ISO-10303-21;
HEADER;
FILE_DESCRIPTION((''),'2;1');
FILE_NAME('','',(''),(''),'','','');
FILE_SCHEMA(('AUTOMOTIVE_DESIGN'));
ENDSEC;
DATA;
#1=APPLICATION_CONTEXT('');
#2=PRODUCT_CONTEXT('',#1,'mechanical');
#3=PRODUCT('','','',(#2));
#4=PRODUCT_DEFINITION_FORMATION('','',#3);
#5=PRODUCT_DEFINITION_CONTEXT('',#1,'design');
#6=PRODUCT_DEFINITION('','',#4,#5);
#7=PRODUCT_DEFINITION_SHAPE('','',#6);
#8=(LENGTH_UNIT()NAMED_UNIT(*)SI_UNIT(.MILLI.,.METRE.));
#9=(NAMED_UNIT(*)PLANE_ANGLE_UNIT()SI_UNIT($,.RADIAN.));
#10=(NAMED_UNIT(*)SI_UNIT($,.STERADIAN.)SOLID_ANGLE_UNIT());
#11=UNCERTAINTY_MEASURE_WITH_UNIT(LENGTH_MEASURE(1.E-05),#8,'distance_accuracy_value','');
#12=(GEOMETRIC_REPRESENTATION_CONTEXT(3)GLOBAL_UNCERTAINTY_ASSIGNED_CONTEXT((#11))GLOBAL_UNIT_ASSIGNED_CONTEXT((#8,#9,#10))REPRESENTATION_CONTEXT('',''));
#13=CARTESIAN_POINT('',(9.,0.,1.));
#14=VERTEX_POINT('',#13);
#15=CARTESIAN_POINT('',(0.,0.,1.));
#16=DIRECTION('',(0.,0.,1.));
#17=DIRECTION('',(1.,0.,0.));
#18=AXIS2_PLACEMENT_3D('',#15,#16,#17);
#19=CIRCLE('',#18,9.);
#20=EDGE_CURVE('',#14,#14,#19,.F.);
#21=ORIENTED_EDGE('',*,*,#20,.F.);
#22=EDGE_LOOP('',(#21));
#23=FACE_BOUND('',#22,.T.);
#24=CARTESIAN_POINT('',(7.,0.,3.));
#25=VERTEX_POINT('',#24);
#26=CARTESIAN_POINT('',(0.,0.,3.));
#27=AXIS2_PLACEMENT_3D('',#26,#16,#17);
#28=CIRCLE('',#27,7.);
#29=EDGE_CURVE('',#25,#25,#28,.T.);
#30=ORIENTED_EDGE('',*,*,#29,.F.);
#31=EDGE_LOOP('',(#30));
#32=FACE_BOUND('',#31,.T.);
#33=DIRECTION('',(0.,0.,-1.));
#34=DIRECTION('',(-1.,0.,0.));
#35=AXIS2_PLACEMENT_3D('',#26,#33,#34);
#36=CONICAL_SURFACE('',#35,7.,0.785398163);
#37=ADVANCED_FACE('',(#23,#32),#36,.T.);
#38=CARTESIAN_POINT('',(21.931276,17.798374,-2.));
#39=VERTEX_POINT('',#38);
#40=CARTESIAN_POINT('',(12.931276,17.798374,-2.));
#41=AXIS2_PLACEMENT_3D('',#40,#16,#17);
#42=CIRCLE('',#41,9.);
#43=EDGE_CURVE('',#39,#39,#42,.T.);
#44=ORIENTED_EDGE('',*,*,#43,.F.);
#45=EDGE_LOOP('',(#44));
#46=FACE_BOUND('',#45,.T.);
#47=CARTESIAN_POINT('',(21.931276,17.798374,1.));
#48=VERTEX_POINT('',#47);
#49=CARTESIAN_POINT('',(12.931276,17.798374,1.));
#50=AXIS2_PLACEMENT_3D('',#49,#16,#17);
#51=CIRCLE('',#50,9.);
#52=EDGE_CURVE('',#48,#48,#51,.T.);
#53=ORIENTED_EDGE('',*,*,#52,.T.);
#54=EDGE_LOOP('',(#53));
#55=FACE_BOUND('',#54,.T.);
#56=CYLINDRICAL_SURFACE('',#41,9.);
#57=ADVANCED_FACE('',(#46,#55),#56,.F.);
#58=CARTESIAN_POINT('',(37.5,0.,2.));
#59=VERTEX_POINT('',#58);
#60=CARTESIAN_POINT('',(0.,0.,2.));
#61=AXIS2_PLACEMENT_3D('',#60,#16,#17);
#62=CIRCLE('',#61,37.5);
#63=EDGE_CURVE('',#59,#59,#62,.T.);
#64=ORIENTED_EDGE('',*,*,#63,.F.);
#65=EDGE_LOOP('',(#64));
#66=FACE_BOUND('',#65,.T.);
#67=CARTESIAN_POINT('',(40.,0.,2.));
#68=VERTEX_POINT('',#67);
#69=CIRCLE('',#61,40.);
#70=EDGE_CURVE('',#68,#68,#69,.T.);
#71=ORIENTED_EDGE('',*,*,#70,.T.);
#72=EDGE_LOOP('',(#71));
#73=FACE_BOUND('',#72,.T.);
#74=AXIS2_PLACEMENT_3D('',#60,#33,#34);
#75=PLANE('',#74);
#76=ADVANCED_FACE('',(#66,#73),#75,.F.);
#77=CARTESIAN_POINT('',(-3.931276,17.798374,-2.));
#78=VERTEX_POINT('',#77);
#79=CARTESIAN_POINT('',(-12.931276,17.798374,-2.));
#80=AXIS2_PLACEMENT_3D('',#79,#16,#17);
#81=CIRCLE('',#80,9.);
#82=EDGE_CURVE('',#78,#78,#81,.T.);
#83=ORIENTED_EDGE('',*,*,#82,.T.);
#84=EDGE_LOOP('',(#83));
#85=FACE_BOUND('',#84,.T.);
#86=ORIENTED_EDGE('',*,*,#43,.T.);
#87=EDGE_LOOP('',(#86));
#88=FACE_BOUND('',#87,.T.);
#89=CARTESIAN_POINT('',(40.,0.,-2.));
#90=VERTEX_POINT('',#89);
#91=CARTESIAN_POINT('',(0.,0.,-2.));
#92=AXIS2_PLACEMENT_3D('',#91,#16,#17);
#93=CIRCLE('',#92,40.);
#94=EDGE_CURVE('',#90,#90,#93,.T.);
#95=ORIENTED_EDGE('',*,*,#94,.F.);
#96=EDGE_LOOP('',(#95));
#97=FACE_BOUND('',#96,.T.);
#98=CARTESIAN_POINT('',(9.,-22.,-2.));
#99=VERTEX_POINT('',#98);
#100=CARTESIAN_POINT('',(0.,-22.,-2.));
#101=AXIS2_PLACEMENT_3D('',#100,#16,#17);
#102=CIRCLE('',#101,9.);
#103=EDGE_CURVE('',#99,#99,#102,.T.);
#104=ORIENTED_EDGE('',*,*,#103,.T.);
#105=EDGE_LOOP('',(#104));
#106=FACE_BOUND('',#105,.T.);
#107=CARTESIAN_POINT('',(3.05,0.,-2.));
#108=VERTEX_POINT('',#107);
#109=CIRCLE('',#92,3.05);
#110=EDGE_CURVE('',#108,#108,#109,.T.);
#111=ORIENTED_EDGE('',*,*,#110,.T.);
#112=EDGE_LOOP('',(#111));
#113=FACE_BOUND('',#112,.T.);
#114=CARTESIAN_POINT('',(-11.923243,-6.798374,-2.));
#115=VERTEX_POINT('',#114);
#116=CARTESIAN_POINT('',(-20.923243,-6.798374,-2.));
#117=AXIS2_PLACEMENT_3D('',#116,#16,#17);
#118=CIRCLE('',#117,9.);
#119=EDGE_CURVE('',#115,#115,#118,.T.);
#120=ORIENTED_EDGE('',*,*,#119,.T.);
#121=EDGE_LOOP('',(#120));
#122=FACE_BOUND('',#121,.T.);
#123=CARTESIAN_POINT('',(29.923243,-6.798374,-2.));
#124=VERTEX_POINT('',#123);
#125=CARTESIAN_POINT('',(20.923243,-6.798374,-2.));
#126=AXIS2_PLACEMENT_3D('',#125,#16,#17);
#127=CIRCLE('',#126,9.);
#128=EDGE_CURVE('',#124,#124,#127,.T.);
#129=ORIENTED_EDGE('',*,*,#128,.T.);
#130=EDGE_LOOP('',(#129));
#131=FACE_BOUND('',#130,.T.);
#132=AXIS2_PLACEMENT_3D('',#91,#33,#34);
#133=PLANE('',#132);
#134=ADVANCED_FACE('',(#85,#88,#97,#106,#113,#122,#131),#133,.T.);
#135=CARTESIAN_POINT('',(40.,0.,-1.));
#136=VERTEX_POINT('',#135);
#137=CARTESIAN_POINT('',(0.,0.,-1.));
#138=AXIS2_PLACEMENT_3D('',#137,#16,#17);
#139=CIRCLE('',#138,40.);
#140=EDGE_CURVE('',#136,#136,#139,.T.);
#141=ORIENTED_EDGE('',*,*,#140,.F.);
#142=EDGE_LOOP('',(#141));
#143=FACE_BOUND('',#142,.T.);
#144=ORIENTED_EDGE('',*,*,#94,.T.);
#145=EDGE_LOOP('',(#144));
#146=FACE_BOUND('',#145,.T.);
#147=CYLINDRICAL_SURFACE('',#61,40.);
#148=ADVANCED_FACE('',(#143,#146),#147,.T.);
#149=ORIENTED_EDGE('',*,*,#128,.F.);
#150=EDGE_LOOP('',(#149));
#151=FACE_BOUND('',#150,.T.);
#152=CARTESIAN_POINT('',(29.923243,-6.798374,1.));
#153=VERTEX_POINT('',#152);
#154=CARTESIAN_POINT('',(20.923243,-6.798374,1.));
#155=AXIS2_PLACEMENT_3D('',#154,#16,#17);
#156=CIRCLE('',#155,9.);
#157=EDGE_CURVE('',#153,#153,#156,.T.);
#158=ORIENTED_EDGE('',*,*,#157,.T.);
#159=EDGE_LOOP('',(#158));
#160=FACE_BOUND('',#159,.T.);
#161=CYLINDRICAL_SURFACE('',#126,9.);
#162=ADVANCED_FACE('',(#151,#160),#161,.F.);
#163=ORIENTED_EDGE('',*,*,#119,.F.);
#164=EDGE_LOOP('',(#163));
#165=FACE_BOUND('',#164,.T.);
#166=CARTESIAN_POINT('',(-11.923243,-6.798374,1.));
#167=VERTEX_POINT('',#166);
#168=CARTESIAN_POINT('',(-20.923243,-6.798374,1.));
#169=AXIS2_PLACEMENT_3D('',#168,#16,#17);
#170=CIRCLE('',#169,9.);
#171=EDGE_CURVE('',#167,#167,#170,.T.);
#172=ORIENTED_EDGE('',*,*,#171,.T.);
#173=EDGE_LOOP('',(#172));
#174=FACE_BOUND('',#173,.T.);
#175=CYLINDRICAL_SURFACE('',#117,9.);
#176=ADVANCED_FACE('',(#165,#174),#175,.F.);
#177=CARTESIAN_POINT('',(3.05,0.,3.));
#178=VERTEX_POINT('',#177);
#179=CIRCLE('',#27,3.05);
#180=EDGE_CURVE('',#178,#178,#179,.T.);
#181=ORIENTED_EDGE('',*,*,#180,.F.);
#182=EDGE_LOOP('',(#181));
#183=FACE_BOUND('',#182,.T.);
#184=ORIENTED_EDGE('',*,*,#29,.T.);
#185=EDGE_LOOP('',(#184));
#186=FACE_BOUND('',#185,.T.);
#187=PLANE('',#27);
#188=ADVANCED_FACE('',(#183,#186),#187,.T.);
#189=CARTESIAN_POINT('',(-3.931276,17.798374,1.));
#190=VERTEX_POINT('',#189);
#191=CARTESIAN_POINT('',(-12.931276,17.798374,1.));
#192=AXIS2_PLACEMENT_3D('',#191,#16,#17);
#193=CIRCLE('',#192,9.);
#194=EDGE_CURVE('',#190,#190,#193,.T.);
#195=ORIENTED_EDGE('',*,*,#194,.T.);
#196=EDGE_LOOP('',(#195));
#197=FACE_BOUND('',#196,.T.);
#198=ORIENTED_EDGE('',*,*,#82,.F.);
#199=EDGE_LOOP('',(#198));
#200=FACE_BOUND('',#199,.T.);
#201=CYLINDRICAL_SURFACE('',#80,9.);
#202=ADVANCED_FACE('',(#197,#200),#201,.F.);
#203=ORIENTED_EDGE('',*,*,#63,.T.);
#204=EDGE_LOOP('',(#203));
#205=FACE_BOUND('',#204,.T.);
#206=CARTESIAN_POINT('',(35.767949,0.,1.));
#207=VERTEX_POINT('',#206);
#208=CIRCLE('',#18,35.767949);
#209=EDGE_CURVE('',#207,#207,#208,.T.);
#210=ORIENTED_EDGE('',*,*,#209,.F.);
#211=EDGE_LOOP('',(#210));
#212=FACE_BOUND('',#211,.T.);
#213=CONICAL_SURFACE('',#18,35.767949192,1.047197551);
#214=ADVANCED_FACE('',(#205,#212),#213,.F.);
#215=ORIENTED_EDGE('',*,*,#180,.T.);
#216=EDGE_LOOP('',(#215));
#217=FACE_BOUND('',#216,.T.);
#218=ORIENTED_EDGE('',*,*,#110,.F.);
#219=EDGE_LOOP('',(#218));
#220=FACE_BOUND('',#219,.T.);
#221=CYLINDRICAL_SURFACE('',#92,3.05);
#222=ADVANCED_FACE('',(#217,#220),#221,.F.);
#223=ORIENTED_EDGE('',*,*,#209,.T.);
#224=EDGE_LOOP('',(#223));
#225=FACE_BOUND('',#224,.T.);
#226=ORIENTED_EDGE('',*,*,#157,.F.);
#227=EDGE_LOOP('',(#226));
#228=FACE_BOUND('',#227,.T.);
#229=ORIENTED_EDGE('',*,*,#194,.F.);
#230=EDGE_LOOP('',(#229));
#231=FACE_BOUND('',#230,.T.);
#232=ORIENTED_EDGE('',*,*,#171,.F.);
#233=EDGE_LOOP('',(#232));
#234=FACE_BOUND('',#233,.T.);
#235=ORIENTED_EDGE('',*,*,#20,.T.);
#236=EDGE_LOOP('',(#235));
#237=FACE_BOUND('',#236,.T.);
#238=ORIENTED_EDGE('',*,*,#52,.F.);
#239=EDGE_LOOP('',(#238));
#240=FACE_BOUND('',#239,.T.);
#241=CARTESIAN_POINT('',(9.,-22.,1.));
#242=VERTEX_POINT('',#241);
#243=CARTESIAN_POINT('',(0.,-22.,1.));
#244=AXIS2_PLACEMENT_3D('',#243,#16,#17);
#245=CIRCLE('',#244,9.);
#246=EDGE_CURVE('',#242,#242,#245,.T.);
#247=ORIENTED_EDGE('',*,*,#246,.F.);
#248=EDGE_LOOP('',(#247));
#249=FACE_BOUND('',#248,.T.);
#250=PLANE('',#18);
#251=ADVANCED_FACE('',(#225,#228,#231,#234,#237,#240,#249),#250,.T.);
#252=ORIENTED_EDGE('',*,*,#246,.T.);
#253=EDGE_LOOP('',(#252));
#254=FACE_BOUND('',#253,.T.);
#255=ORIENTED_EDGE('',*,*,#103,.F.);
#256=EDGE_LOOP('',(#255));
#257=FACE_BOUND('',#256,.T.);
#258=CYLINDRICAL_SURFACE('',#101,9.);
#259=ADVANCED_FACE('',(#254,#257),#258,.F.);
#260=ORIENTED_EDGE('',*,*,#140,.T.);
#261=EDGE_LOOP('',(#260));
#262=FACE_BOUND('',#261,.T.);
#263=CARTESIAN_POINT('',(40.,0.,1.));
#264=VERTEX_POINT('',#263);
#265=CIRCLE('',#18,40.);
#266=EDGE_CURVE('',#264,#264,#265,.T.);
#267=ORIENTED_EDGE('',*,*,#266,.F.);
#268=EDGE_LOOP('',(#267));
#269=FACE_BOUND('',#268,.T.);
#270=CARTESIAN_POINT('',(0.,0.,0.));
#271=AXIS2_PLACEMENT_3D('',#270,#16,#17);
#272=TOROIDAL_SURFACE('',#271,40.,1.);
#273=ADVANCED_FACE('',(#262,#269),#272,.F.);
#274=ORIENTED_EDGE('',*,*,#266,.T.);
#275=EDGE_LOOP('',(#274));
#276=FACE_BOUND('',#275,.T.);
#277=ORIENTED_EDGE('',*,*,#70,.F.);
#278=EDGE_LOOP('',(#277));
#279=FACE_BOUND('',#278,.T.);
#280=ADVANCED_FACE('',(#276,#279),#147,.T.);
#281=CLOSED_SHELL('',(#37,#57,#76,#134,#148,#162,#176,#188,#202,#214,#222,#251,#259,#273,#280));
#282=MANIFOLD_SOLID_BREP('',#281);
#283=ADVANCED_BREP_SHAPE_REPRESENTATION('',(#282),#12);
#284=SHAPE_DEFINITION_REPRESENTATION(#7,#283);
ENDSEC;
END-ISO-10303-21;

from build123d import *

# Parameters (mm, degrees)
SKETCH2_W          = 7
SKETCH2_H          = 1
SKETCH3_R          = 3.05
CUT_EXTRUDE1_DEPTH = 57.789083458
CHAMFER1_SIZE      = 2
SKETCH4_R          = 9
CUT_EXTRUDE2_DEPTH = 57.648036153


with BuildPart() as part:
    # Sketch2 → Revolve1 (revolve)
    with BuildSketch(Plane(origin=(0, 0, 0), x_dir=(1, 0, 0), z_dir=(0, 1, 0))):
        with Locations((3.5, -2.5)):
            Rectangle(SKETCH2_W, SKETCH2_H)
        with BuildLine():
            Line((0, 2), (0, -2))
            Line((0, -2), (7, -2))
            Line((7, -2), (7, -1))
            Line((7, -1), (35.767949192, -1))
            Line((35.767949192, -1), (37.5, -2))
            Line((37.5, -2), (40, -2))
            Line((40, -2), (40, -1))
            ThreePointArc((40, -1), (39, 0), (40, 1))
            Line((40, 1), (40, 2))
            Line((40, 2), (0, 2))
        make_face()
    revolve(axis=Axis((0, 0, 2), (0, 0, -1)))

    # Sketch3 → Cut-Extrude1 (cut, through all)
    with BuildSketch(Plane.XY.offset(3)):
        Circle(SKETCH3_R)
    extrude(amount=-CUT_EXTRUDE1_DEPTH, mode=Mode.SUBTRACT)

    # Chamfer1
    chamfer1_edges = [part.edges().sort_by_distance(p)[0] for p in [
        (-7, 0, 1),
    ]]
    chamfer(chamfer1_edges, length=CHAMFER1_SIZE - 0.0001)  # a hair under: the kernel refuses the full size

    # Sketch4 → Cut-Extrude2 (cut, through all)
    with BuildSketch(Plane.XY.offset(1)):
        with Locations((0, -22)):
            Circle(SKETCH4_R)
        with Locations((-20.923243358, -6.798373876)):
            Circle(SKETCH4_R)
        with Locations((-12.93127555, 17.798373876)):
            Circle(SKETCH4_R)
        with Locations((12.93127555, 17.798373876)):
            Circle(SKETCH4_R)
        with Locations((20.923243358, -6.798373876)):
            Circle(SKETCH4_R)
    extrude(amount=-CUT_EXTRUDE2_DEPTH, mode=Mode.SUBTRACT)


solid = part.part
